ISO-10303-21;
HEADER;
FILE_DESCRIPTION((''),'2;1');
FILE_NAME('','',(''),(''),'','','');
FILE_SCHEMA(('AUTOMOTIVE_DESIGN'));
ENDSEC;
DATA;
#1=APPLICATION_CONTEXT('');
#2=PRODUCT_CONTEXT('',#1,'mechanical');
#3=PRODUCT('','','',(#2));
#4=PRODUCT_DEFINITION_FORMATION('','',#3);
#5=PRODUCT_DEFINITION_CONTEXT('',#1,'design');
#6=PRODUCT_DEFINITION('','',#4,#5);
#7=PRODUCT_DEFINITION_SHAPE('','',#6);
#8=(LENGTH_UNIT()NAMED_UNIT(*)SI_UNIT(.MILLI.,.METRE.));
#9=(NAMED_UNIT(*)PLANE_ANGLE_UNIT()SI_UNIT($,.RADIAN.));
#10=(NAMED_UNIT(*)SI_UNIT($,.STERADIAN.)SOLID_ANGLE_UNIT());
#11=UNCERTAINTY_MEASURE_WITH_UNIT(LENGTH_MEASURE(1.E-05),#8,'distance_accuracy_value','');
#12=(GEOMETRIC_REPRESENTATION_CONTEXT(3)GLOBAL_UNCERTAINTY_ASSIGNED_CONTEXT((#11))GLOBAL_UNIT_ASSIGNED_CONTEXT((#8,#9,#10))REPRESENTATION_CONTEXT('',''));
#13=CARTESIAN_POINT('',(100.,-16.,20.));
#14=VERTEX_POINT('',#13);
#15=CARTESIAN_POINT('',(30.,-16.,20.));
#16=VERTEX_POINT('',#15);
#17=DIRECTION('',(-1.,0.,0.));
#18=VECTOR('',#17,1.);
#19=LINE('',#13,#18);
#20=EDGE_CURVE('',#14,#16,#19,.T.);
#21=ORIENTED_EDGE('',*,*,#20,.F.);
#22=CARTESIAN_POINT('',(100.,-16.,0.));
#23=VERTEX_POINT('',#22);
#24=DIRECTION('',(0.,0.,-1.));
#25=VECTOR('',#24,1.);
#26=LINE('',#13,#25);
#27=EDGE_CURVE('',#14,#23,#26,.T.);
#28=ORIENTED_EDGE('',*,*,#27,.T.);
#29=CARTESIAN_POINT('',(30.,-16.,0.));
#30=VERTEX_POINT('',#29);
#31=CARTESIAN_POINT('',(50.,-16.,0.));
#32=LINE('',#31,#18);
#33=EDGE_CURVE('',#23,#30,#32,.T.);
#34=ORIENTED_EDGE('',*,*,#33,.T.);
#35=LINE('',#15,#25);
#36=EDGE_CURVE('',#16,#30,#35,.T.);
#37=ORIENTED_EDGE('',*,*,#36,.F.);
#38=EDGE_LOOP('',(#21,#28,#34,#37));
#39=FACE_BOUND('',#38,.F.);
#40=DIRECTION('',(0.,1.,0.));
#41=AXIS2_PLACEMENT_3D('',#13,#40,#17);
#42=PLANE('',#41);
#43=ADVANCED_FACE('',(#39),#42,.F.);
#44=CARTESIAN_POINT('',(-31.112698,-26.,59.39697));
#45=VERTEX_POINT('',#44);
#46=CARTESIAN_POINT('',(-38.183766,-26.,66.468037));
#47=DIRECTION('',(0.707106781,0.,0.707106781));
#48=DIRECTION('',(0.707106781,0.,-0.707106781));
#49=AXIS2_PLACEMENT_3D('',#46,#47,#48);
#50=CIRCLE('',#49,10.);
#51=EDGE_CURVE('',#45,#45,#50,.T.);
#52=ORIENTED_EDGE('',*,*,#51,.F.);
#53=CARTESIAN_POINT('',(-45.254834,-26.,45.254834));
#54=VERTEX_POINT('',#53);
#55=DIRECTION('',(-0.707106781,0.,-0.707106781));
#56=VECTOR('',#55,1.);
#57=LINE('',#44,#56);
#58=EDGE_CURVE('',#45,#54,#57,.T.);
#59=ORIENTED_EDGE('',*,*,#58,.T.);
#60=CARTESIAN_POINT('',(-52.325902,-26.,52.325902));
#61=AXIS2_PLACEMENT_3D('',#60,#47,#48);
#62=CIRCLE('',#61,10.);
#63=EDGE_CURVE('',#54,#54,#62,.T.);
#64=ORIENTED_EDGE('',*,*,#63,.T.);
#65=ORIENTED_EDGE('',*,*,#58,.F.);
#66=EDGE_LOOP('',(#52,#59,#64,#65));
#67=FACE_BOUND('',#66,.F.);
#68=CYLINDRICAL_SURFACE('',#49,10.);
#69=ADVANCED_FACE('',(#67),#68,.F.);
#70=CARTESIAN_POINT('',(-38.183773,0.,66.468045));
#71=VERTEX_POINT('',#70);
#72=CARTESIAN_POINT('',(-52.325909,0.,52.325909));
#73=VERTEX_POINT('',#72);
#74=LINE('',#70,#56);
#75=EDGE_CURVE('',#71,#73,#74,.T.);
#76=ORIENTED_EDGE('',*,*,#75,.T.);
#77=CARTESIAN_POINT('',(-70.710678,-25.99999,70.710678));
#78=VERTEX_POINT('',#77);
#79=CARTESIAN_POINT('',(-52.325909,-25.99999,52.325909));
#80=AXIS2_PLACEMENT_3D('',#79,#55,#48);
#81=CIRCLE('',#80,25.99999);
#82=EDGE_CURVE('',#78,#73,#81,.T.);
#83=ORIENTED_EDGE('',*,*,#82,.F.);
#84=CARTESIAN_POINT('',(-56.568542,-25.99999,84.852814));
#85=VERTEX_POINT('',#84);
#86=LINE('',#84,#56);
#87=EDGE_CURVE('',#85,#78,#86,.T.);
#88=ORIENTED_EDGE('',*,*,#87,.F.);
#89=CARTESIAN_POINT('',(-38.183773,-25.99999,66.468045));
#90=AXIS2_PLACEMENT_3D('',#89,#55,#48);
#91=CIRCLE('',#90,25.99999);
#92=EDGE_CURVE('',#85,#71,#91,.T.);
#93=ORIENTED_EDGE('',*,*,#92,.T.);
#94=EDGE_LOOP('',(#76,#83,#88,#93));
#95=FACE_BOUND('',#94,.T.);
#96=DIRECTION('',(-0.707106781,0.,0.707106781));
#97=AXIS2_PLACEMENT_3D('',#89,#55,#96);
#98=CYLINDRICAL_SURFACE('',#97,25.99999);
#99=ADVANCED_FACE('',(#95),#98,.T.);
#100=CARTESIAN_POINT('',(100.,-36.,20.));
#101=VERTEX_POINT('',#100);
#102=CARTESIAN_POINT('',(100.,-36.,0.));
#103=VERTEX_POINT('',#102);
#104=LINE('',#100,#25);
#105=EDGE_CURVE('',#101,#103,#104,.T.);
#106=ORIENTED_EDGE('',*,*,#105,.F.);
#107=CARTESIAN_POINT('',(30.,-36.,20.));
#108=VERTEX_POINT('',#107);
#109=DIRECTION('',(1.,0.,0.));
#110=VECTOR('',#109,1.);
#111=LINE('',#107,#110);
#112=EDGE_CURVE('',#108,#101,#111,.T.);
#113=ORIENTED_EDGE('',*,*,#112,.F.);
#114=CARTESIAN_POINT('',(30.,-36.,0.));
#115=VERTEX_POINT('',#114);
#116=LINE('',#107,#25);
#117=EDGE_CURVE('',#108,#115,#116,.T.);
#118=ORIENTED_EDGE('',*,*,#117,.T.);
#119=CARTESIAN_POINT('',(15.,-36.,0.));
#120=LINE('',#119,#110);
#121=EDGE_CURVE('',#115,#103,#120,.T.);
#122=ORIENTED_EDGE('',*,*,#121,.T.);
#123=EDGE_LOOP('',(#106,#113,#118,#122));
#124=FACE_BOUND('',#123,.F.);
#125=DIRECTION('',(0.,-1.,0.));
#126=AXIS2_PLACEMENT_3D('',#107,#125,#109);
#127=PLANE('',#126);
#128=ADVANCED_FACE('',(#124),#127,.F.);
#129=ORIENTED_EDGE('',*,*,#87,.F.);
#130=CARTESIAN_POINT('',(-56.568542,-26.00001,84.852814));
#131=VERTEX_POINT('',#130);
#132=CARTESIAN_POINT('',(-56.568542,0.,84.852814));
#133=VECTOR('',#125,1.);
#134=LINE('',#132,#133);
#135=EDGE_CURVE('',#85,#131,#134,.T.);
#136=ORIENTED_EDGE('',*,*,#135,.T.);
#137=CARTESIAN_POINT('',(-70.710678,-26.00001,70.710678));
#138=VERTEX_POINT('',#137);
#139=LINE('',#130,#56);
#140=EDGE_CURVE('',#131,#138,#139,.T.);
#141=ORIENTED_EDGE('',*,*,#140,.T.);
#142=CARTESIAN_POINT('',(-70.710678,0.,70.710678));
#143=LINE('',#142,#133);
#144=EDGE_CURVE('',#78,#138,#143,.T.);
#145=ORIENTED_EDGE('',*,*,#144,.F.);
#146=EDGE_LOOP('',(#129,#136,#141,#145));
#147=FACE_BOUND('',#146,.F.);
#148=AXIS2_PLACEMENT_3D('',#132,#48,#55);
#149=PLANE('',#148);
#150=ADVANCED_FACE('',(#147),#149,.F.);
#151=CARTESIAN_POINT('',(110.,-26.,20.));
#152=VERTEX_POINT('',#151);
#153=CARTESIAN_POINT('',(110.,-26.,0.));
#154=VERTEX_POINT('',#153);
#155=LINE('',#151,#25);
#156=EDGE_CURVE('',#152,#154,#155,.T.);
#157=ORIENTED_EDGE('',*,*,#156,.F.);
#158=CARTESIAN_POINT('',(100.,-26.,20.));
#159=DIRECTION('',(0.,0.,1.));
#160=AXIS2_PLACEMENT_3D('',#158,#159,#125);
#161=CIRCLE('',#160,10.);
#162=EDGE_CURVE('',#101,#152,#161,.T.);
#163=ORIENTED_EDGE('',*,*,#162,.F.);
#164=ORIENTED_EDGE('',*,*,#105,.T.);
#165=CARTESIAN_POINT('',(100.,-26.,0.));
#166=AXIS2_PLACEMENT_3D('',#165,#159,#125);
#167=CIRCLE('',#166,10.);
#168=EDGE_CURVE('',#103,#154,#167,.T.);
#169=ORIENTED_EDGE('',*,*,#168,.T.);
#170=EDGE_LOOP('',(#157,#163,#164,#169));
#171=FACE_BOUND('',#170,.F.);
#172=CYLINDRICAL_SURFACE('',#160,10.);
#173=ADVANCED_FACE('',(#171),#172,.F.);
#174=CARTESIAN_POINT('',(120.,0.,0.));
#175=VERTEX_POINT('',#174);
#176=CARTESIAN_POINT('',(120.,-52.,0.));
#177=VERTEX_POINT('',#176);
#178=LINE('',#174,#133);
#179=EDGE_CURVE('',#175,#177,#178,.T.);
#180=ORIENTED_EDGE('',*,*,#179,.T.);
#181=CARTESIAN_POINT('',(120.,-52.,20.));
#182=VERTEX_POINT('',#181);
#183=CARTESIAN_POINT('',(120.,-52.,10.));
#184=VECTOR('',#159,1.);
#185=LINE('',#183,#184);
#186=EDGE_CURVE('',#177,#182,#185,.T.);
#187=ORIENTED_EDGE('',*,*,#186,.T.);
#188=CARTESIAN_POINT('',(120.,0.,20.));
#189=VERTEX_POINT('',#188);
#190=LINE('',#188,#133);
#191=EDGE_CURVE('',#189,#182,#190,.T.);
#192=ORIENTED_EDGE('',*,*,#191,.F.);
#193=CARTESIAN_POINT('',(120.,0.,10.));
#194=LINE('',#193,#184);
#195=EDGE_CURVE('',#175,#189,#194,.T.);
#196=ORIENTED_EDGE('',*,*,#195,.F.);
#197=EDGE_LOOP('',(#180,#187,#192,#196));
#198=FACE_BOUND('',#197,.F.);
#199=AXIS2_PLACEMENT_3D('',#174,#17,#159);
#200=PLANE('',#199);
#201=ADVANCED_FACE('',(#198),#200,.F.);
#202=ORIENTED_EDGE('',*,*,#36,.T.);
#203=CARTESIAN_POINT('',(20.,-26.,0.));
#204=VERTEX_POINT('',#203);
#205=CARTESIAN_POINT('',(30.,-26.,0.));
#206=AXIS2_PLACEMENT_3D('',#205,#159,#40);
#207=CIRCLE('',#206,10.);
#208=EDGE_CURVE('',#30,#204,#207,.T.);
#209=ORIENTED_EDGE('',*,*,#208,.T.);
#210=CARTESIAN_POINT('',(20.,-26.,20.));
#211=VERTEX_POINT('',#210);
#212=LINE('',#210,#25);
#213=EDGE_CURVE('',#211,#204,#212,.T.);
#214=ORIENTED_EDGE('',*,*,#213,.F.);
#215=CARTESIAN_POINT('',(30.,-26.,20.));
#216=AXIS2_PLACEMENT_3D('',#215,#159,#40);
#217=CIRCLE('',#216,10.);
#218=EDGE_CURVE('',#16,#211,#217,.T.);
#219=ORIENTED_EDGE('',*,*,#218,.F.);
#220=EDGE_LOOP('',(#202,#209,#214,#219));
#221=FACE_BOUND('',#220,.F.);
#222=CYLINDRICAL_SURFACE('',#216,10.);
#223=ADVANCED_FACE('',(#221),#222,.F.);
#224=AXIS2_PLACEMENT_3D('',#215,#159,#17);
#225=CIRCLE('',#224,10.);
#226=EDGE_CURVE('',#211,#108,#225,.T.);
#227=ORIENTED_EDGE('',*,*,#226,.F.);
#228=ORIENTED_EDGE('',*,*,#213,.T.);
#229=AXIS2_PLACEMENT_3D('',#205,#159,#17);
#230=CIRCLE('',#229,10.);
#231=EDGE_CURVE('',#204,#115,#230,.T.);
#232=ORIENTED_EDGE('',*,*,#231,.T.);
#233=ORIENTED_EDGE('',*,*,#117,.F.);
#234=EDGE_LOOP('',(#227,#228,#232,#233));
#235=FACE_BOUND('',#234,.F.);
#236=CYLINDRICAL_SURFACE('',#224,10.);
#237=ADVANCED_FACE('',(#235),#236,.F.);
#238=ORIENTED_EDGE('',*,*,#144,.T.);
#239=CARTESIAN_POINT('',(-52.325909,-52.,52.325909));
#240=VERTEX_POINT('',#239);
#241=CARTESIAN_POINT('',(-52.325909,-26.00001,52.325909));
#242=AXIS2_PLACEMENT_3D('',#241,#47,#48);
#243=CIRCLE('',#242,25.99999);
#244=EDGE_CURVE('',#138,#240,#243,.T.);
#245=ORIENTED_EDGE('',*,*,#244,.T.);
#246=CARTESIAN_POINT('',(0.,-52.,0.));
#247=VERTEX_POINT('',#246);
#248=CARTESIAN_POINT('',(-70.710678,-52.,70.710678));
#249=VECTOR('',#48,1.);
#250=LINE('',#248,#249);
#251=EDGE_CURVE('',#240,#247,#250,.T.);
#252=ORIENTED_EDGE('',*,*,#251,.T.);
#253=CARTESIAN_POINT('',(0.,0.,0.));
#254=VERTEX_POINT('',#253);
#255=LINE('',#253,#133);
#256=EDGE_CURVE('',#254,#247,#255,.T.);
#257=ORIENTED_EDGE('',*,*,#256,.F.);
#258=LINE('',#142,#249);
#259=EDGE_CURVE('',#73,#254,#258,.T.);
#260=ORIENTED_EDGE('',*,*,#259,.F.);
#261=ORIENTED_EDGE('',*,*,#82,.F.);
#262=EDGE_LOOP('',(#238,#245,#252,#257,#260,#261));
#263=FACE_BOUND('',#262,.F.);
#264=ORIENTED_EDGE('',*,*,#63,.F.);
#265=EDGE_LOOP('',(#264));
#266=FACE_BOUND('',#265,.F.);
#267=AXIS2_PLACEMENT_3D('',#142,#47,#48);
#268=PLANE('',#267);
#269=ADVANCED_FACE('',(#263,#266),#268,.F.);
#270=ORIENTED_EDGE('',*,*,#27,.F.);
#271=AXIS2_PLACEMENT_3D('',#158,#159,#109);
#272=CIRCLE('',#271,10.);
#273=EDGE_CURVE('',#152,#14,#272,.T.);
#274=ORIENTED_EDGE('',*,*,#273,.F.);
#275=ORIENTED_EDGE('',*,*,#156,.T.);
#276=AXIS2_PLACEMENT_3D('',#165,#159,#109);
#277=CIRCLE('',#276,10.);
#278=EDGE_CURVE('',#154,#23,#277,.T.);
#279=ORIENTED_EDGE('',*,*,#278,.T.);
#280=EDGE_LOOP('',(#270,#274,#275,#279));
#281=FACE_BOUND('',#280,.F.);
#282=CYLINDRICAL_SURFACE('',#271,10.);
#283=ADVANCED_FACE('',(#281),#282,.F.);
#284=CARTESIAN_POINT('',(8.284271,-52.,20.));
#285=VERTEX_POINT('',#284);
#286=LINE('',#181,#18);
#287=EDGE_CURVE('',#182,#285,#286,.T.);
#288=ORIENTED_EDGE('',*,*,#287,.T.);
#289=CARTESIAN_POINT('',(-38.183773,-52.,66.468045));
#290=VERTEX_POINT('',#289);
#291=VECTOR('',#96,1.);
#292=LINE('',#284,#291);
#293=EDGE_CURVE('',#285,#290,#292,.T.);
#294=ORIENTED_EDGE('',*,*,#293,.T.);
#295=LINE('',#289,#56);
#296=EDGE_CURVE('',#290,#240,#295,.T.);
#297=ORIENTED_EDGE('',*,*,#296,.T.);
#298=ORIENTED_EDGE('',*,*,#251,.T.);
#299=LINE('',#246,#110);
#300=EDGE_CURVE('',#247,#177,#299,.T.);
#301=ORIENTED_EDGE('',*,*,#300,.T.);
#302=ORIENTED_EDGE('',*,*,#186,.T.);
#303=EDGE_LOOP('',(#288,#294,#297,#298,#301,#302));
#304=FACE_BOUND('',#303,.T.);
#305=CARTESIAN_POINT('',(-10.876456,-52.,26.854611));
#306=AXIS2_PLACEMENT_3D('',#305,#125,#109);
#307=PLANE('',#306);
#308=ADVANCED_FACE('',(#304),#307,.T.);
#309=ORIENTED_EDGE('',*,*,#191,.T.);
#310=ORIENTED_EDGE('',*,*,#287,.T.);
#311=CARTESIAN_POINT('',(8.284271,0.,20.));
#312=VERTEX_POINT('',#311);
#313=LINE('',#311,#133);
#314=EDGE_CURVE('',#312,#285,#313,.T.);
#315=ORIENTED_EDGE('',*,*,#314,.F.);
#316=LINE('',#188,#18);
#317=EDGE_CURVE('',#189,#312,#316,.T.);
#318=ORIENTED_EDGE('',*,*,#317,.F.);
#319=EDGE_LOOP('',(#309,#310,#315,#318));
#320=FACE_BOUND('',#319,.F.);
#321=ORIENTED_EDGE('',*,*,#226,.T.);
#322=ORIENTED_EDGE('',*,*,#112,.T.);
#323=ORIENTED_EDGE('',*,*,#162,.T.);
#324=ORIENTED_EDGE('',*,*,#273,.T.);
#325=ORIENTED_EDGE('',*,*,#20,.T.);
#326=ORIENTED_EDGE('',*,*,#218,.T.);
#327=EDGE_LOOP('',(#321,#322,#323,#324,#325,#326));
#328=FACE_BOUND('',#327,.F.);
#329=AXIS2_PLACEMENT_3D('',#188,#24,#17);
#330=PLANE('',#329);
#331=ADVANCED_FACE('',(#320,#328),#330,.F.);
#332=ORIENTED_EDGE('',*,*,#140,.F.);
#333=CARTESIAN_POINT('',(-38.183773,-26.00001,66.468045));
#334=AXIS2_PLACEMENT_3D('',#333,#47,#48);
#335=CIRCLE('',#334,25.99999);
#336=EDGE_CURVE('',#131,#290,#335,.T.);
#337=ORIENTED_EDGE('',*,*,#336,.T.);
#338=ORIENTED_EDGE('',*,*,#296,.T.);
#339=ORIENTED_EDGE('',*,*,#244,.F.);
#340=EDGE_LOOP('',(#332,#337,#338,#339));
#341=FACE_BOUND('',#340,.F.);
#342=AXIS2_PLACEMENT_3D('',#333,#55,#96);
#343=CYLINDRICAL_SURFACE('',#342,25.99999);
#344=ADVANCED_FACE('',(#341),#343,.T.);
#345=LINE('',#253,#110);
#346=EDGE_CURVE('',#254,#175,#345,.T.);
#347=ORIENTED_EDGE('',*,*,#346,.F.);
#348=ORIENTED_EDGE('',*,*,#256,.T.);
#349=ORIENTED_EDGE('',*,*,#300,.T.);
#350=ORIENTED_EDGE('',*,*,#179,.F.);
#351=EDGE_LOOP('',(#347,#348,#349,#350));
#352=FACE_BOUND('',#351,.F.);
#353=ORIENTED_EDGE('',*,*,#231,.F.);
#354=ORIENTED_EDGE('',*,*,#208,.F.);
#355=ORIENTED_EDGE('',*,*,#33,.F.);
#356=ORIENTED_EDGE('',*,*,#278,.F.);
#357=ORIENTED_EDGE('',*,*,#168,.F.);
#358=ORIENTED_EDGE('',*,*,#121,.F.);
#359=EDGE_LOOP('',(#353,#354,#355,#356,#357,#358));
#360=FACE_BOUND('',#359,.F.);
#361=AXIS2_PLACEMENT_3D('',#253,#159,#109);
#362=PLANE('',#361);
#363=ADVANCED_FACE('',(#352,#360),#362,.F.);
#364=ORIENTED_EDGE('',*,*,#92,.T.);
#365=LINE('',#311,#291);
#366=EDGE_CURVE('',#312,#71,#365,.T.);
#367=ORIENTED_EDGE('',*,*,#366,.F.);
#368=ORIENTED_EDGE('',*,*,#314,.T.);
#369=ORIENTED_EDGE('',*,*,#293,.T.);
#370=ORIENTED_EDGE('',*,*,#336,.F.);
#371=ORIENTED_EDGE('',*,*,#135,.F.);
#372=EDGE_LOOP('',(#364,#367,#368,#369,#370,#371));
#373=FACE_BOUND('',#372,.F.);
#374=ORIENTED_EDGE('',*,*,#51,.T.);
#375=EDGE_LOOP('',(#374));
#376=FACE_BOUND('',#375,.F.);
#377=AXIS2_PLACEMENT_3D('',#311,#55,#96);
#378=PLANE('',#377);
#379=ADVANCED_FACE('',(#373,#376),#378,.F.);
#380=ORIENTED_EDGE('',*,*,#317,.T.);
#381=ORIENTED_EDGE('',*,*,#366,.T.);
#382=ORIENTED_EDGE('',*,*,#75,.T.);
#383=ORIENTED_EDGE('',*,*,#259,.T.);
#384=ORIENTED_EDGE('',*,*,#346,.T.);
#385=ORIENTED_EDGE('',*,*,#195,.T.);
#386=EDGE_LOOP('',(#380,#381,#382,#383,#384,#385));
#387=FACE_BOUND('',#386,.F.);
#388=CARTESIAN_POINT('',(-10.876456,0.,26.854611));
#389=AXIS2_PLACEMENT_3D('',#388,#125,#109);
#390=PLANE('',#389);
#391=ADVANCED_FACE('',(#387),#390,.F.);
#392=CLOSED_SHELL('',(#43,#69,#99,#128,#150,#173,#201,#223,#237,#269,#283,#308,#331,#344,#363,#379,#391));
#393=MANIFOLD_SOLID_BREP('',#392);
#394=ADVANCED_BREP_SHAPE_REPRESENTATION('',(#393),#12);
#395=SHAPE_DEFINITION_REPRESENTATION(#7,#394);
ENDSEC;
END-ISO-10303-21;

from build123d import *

# Parameters (mm, degrees)
F0_W     = 90
F0_H     = 20
F0_W_2   = 10
F1_DEPTH = 52
F2_R     = 25.99999
F4_DEPTH = 25
F6_DEPTH = 25


# Not quite as in the source:
# - a fillet or chamfer is up to 0.001 mm smaller than in the source, because OpenCascade refuses the exact size


with BuildPart() as f1:
    # F0 (on Front) → F1 (new body)
    with BuildSketch(Plane.XZ):
        Polygon((-45.2548339959, 45.2548339959), (0, 0), (20, 0), (20, 20), (8.2842712475, 20), (-31.1126983722, 59.3969696197), align=None)
        with Locations((65, 10)):
            Rectangle(F0_W, F0_H)
        Polygon((-59.3969696197, 59.3969696197), (-45.2548339959, 45.2548339959), (-31.1126983722, 59.3969696197), (-45.2548339959, 73.5391052434), align=None)
        with Locations((115, 10)):
            Rectangle(F0_W_2, F0_H)
        Polygon((-70.7106781187, 70.7106781187), (-59.3969696197, 59.3969696197), (-45.2548339959, 73.5391052434), (-56.5685424949, 84.8528137424), align=None)
    extrude(amount=F1_DEPTH)

    # F2 (radius 26 in the source; OpenCascade refuses exactly that, so slightly less here)
    f2_edges = [f1.edges().sort_by_distance(p)[0] for p in [
        (-63.63961, 0, 77.781746),
        (-63.63961, -52, 77.781746),
    ]]
    fillet(f2_edges, radius=F2_R)

    # F3 (on face) → F4 (cut)
    with BuildSketch(Plane(origin=(14.1421356237, 0, 14.1421356237), x_dir=(0.7071067812, 0, -0.7071067812), z_dir=(0.7071067812, 0, 0.7071067812))):
        with BuildLine():
            ThreePointArc((-84, -26), (-74, -36), (-64, -26))
            ThreePointArc((-64, -26), (-74, -16), (-84, -26))
        make_face()
    extrude(amount=-F4_DEPTH, mode=Mode.SUBTRACT)

    # F5 (on face) → F6 (cut)
    with BuildSketch(Plane.XY.offset(20)):
        with BuildLine():
            Line((100, -16), (30, -16))
            ThreePointArc((30, -16), (22.9289321881, -18.9289321881), (20, -26))
            ThreePointArc((20, -26), (22.9289321881, -33.0710678119), (30, -36))
            Line((30, -36), (100, -36))
            ThreePointArc((100, -36), (107.0710678119, -33.0710678119), (110, -26))
            ThreePointArc((110, -26), (107.0710678119, -18.9289321881), (100, -16))
        make_face()
    extrude(amount=-F6_DEPTH, mode=Mode.SUBTRACT)


solid = f1.part
